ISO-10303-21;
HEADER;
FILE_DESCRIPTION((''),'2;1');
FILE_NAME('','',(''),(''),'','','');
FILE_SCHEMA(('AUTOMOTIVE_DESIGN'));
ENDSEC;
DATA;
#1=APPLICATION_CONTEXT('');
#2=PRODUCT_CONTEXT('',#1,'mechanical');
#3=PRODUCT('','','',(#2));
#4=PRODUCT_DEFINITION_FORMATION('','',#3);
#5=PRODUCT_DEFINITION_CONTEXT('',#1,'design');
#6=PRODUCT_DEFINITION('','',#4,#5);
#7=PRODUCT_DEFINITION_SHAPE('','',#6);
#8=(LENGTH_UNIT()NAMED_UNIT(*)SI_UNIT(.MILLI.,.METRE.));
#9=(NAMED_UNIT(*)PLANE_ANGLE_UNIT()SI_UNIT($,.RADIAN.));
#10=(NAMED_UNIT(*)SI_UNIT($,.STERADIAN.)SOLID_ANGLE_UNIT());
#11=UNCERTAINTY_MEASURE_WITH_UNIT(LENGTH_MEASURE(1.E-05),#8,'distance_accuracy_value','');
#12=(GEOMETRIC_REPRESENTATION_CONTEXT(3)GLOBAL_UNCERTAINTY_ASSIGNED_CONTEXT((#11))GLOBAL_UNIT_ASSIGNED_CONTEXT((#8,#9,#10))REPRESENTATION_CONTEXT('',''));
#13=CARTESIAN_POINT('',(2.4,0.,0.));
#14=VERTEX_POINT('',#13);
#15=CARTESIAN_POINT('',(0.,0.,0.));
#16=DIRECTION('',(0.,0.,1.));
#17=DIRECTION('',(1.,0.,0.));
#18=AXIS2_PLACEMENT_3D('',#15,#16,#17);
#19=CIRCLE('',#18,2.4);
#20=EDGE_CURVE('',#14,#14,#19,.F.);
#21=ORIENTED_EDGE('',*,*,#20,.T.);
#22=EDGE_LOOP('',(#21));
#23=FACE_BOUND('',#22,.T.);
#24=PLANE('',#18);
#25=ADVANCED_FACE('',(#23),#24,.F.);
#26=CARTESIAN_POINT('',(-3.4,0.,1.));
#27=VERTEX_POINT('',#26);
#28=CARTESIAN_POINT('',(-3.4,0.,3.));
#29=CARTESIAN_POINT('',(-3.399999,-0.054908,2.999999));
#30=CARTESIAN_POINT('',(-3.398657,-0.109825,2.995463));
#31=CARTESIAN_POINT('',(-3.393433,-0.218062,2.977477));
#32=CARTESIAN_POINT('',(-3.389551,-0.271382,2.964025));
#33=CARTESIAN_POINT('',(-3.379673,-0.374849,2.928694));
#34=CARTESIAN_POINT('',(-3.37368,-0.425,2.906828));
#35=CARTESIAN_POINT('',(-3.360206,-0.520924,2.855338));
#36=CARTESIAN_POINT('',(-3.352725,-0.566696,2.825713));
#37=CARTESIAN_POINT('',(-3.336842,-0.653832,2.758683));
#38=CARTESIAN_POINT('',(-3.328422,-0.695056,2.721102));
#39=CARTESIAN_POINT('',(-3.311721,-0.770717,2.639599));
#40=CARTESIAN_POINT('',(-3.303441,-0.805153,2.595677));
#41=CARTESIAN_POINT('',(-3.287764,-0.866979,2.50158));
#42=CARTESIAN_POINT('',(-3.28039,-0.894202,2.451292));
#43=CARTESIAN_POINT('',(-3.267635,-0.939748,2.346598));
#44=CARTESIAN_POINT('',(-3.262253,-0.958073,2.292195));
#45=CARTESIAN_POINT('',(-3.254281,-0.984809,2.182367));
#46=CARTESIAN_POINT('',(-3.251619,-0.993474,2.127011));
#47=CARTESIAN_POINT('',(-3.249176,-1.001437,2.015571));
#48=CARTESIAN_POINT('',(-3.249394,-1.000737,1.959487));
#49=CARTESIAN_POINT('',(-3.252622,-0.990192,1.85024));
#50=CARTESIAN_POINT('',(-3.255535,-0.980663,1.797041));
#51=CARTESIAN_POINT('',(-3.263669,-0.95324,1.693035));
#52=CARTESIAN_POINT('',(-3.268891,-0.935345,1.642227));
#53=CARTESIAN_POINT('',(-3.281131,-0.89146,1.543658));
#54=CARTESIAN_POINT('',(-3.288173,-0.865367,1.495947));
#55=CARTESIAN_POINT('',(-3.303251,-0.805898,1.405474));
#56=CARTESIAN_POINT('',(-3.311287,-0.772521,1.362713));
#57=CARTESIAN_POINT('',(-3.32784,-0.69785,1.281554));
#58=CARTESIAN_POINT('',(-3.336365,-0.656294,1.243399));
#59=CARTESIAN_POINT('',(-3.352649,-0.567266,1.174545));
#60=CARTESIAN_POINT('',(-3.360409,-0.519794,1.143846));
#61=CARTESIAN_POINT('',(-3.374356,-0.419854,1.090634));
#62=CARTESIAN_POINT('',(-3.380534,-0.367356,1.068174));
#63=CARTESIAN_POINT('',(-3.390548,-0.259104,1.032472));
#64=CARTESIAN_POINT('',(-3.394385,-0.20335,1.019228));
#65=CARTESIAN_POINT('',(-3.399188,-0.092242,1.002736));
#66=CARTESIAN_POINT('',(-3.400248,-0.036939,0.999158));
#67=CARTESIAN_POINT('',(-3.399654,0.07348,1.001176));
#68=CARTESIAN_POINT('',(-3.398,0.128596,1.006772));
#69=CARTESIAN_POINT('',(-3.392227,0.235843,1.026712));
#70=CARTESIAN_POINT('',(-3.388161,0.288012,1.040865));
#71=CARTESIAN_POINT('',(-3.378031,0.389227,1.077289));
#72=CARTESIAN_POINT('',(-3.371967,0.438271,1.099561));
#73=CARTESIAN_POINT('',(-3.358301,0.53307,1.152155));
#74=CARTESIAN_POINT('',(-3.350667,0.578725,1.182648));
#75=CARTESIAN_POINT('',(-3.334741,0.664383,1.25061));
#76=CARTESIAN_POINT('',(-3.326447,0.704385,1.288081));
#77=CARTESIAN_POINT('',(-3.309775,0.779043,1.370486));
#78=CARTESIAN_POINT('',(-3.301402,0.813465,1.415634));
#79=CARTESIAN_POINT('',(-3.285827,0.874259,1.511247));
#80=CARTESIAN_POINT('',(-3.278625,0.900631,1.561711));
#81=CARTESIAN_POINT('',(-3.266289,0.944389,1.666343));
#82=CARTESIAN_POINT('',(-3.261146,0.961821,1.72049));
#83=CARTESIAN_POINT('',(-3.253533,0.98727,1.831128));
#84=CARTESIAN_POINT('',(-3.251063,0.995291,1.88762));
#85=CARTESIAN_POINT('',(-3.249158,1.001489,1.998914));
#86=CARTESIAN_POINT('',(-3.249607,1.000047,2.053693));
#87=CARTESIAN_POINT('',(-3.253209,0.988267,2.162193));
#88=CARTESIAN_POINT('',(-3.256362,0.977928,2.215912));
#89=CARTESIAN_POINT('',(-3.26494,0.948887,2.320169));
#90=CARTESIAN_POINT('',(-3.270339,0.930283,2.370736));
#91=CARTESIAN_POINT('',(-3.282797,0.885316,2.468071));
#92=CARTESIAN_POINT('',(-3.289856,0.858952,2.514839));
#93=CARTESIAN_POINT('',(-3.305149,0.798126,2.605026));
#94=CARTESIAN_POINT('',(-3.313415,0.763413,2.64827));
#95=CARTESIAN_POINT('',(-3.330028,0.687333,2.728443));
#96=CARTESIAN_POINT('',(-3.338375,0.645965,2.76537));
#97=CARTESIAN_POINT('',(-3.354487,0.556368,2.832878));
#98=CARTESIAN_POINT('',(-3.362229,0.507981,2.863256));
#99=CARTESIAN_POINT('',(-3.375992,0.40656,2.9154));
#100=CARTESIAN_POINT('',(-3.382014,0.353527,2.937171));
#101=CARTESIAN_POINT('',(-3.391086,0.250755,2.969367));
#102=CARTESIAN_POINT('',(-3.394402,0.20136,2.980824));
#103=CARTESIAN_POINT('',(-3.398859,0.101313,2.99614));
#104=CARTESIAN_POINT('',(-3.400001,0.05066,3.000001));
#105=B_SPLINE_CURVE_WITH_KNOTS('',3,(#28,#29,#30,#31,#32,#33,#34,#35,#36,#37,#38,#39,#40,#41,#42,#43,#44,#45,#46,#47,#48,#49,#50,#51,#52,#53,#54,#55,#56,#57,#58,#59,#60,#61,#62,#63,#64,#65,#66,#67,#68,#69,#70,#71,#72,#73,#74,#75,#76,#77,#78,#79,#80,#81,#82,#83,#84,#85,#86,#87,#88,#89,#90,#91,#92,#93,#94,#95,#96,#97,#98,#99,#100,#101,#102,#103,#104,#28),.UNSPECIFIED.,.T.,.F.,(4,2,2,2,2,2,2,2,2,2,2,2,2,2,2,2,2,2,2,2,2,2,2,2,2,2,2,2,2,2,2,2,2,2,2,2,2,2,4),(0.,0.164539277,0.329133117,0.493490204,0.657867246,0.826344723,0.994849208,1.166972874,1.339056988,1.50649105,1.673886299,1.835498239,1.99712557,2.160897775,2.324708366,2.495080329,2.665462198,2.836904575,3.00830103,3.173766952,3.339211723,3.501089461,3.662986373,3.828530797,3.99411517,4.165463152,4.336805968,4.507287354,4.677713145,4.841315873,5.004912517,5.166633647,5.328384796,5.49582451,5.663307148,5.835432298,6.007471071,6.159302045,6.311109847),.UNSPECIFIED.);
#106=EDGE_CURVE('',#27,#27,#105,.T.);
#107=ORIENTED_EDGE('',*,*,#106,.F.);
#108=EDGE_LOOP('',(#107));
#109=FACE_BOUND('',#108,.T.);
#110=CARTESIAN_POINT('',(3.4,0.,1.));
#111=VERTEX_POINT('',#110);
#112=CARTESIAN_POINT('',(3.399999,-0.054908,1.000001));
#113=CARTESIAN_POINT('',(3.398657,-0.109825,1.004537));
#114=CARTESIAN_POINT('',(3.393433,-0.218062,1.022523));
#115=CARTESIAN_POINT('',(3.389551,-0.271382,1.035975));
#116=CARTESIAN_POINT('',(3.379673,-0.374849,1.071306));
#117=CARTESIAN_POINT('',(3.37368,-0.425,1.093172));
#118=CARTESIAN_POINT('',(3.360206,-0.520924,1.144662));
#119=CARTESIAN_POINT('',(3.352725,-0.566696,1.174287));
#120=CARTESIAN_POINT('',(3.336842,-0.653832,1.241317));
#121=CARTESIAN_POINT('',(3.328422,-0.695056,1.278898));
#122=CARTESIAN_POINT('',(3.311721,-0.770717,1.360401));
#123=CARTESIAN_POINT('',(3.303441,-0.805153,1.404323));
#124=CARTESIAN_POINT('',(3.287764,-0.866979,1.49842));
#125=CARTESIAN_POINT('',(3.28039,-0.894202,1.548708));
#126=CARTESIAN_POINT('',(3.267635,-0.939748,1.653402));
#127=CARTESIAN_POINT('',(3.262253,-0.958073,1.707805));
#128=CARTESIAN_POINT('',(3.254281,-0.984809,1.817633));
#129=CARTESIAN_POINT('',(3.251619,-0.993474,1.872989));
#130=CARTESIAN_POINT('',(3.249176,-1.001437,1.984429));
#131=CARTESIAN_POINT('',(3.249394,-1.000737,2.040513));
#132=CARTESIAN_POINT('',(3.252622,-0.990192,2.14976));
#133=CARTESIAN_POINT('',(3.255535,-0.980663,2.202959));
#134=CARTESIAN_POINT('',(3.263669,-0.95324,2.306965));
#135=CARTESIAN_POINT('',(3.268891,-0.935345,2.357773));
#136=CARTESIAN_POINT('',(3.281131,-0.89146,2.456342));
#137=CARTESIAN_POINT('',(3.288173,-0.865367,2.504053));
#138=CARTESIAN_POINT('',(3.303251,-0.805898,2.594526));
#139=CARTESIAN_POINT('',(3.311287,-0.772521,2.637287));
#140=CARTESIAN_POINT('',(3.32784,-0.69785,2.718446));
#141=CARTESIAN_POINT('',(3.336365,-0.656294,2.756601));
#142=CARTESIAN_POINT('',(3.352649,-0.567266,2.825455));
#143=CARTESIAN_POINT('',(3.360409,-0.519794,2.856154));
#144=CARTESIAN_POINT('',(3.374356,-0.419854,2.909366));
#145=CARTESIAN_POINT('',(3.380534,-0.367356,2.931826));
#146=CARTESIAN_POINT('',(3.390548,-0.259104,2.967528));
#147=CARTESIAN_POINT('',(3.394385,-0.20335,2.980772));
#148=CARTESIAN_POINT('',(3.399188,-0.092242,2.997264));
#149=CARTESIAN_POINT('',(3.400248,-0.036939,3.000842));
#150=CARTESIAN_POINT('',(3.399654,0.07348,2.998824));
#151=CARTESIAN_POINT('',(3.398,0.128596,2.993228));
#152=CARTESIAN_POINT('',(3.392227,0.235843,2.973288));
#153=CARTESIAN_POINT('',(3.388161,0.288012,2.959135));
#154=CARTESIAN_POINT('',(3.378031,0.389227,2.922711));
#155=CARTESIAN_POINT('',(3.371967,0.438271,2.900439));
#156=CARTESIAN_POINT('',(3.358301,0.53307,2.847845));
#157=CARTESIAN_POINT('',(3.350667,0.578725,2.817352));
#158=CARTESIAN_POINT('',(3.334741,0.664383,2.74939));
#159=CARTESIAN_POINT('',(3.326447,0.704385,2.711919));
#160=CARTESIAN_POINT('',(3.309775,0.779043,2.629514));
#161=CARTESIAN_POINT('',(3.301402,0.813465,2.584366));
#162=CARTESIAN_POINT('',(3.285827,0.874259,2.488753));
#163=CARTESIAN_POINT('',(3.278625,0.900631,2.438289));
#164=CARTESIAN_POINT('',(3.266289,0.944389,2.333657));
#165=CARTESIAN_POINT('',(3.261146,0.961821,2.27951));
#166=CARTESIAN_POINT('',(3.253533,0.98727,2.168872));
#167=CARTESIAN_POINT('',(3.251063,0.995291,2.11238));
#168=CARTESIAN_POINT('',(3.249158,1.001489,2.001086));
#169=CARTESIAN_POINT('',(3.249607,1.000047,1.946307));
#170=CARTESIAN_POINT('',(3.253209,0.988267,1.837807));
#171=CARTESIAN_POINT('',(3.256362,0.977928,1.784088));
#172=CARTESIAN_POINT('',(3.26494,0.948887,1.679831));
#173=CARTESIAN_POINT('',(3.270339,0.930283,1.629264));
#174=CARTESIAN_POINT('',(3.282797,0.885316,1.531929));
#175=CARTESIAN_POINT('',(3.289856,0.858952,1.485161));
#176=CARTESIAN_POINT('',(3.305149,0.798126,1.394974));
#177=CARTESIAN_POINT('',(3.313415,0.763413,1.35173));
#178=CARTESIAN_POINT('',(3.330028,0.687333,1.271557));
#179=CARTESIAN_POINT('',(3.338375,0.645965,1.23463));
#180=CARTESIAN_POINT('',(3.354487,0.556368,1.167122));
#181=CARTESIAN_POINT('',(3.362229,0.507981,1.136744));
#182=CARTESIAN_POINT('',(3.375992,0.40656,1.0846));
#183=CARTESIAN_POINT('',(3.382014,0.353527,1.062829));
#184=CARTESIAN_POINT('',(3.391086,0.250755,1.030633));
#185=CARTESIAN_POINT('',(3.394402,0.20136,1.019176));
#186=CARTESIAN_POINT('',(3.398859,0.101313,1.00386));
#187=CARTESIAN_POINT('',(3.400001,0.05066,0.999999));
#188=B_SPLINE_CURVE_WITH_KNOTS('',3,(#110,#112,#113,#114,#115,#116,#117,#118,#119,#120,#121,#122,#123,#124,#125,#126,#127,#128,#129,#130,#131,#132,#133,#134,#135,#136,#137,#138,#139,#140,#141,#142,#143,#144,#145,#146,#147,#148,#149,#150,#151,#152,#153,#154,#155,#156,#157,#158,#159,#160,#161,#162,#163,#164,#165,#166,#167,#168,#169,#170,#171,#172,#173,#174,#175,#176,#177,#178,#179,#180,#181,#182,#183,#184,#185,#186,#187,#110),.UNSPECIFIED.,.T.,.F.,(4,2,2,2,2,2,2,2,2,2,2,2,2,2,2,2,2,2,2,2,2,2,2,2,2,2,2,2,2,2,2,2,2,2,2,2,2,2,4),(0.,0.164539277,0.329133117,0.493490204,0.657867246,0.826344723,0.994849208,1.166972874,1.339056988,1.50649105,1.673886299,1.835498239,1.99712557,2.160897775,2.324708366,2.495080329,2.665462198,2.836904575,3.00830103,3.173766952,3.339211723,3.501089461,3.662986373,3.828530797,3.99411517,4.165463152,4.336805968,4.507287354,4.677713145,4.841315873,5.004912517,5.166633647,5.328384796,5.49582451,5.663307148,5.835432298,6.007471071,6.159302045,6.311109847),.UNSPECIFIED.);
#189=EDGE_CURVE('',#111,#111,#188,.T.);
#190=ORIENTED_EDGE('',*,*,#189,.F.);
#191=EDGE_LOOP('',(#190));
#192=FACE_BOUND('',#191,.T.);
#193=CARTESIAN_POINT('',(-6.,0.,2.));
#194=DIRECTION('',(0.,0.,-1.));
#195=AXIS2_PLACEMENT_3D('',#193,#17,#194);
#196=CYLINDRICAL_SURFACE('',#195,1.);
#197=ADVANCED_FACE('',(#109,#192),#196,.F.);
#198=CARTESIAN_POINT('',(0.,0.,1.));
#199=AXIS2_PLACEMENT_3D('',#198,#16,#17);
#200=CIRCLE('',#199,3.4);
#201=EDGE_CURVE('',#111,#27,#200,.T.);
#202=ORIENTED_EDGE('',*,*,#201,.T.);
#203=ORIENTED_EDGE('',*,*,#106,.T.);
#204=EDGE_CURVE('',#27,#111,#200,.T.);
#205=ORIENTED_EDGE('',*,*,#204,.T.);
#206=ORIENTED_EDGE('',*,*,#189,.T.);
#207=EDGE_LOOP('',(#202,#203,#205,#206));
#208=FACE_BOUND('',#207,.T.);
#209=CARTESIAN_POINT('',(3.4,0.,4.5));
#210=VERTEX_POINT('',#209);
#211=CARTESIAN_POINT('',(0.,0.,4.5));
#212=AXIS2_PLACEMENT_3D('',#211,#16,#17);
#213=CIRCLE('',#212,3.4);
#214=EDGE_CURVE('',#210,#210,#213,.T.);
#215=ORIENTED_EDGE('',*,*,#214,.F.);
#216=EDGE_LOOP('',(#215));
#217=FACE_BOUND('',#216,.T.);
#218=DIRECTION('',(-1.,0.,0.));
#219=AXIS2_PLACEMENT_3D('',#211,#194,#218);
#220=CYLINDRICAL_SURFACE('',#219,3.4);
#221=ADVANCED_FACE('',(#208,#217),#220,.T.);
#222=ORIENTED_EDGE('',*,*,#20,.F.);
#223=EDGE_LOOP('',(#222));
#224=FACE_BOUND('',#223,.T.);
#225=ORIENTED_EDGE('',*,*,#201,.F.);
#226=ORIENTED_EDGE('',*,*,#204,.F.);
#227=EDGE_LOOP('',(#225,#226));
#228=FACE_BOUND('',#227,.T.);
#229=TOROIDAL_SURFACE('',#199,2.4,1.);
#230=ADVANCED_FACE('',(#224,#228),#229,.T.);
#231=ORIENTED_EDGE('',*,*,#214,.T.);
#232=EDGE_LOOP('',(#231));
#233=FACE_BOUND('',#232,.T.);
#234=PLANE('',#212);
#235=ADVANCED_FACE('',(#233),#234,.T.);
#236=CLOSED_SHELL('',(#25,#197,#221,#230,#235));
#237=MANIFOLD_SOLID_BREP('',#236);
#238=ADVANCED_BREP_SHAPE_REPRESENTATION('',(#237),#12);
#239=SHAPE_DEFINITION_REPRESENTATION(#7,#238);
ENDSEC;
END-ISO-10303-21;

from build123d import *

# Parameters (mm, degrees)
SKETCH1_R           = 3.4
BOSS_EXTRUDE1_DEPTH = 4.5
SKETCH2_R           = 1
CUT_EXTRUDE1_DEPTH  = 10
FILLET1_R           = 1


with BuildPart() as part:
    # Sketch1 → Boss-Extrude1 (new body)
    with BuildSketch(Plane.XY):
        Circle(SKETCH1_R)
    extrude(amount=BOSS_EXTRUDE1_DEPTH)

    # Sketch2 → Cut-Extrude1 (cut)
    with BuildSketch(Plane(origin=(4, 0, 0), x_dir=(0, 0, -1), z_dir=(1, 0, 0))):
        with Locations(Location((-2, 0, 0), (0, 0, 180))):
            Circle(SKETCH2_R)
    extrude(amount=-CUT_EXTRUDE1_DEPTH, mode=Mode.SUBTRACT)

    # Fillet1
    fillet1_edges = [part.edges().sort_by_distance(p)[0] for p in [
        (-3.4, 0, 0),
    ]]
    fillet(fillet1_edges, radius=FILLET1_R - 0.0001)  # a hair under: the kernel refuses the full size


solid = part.part
